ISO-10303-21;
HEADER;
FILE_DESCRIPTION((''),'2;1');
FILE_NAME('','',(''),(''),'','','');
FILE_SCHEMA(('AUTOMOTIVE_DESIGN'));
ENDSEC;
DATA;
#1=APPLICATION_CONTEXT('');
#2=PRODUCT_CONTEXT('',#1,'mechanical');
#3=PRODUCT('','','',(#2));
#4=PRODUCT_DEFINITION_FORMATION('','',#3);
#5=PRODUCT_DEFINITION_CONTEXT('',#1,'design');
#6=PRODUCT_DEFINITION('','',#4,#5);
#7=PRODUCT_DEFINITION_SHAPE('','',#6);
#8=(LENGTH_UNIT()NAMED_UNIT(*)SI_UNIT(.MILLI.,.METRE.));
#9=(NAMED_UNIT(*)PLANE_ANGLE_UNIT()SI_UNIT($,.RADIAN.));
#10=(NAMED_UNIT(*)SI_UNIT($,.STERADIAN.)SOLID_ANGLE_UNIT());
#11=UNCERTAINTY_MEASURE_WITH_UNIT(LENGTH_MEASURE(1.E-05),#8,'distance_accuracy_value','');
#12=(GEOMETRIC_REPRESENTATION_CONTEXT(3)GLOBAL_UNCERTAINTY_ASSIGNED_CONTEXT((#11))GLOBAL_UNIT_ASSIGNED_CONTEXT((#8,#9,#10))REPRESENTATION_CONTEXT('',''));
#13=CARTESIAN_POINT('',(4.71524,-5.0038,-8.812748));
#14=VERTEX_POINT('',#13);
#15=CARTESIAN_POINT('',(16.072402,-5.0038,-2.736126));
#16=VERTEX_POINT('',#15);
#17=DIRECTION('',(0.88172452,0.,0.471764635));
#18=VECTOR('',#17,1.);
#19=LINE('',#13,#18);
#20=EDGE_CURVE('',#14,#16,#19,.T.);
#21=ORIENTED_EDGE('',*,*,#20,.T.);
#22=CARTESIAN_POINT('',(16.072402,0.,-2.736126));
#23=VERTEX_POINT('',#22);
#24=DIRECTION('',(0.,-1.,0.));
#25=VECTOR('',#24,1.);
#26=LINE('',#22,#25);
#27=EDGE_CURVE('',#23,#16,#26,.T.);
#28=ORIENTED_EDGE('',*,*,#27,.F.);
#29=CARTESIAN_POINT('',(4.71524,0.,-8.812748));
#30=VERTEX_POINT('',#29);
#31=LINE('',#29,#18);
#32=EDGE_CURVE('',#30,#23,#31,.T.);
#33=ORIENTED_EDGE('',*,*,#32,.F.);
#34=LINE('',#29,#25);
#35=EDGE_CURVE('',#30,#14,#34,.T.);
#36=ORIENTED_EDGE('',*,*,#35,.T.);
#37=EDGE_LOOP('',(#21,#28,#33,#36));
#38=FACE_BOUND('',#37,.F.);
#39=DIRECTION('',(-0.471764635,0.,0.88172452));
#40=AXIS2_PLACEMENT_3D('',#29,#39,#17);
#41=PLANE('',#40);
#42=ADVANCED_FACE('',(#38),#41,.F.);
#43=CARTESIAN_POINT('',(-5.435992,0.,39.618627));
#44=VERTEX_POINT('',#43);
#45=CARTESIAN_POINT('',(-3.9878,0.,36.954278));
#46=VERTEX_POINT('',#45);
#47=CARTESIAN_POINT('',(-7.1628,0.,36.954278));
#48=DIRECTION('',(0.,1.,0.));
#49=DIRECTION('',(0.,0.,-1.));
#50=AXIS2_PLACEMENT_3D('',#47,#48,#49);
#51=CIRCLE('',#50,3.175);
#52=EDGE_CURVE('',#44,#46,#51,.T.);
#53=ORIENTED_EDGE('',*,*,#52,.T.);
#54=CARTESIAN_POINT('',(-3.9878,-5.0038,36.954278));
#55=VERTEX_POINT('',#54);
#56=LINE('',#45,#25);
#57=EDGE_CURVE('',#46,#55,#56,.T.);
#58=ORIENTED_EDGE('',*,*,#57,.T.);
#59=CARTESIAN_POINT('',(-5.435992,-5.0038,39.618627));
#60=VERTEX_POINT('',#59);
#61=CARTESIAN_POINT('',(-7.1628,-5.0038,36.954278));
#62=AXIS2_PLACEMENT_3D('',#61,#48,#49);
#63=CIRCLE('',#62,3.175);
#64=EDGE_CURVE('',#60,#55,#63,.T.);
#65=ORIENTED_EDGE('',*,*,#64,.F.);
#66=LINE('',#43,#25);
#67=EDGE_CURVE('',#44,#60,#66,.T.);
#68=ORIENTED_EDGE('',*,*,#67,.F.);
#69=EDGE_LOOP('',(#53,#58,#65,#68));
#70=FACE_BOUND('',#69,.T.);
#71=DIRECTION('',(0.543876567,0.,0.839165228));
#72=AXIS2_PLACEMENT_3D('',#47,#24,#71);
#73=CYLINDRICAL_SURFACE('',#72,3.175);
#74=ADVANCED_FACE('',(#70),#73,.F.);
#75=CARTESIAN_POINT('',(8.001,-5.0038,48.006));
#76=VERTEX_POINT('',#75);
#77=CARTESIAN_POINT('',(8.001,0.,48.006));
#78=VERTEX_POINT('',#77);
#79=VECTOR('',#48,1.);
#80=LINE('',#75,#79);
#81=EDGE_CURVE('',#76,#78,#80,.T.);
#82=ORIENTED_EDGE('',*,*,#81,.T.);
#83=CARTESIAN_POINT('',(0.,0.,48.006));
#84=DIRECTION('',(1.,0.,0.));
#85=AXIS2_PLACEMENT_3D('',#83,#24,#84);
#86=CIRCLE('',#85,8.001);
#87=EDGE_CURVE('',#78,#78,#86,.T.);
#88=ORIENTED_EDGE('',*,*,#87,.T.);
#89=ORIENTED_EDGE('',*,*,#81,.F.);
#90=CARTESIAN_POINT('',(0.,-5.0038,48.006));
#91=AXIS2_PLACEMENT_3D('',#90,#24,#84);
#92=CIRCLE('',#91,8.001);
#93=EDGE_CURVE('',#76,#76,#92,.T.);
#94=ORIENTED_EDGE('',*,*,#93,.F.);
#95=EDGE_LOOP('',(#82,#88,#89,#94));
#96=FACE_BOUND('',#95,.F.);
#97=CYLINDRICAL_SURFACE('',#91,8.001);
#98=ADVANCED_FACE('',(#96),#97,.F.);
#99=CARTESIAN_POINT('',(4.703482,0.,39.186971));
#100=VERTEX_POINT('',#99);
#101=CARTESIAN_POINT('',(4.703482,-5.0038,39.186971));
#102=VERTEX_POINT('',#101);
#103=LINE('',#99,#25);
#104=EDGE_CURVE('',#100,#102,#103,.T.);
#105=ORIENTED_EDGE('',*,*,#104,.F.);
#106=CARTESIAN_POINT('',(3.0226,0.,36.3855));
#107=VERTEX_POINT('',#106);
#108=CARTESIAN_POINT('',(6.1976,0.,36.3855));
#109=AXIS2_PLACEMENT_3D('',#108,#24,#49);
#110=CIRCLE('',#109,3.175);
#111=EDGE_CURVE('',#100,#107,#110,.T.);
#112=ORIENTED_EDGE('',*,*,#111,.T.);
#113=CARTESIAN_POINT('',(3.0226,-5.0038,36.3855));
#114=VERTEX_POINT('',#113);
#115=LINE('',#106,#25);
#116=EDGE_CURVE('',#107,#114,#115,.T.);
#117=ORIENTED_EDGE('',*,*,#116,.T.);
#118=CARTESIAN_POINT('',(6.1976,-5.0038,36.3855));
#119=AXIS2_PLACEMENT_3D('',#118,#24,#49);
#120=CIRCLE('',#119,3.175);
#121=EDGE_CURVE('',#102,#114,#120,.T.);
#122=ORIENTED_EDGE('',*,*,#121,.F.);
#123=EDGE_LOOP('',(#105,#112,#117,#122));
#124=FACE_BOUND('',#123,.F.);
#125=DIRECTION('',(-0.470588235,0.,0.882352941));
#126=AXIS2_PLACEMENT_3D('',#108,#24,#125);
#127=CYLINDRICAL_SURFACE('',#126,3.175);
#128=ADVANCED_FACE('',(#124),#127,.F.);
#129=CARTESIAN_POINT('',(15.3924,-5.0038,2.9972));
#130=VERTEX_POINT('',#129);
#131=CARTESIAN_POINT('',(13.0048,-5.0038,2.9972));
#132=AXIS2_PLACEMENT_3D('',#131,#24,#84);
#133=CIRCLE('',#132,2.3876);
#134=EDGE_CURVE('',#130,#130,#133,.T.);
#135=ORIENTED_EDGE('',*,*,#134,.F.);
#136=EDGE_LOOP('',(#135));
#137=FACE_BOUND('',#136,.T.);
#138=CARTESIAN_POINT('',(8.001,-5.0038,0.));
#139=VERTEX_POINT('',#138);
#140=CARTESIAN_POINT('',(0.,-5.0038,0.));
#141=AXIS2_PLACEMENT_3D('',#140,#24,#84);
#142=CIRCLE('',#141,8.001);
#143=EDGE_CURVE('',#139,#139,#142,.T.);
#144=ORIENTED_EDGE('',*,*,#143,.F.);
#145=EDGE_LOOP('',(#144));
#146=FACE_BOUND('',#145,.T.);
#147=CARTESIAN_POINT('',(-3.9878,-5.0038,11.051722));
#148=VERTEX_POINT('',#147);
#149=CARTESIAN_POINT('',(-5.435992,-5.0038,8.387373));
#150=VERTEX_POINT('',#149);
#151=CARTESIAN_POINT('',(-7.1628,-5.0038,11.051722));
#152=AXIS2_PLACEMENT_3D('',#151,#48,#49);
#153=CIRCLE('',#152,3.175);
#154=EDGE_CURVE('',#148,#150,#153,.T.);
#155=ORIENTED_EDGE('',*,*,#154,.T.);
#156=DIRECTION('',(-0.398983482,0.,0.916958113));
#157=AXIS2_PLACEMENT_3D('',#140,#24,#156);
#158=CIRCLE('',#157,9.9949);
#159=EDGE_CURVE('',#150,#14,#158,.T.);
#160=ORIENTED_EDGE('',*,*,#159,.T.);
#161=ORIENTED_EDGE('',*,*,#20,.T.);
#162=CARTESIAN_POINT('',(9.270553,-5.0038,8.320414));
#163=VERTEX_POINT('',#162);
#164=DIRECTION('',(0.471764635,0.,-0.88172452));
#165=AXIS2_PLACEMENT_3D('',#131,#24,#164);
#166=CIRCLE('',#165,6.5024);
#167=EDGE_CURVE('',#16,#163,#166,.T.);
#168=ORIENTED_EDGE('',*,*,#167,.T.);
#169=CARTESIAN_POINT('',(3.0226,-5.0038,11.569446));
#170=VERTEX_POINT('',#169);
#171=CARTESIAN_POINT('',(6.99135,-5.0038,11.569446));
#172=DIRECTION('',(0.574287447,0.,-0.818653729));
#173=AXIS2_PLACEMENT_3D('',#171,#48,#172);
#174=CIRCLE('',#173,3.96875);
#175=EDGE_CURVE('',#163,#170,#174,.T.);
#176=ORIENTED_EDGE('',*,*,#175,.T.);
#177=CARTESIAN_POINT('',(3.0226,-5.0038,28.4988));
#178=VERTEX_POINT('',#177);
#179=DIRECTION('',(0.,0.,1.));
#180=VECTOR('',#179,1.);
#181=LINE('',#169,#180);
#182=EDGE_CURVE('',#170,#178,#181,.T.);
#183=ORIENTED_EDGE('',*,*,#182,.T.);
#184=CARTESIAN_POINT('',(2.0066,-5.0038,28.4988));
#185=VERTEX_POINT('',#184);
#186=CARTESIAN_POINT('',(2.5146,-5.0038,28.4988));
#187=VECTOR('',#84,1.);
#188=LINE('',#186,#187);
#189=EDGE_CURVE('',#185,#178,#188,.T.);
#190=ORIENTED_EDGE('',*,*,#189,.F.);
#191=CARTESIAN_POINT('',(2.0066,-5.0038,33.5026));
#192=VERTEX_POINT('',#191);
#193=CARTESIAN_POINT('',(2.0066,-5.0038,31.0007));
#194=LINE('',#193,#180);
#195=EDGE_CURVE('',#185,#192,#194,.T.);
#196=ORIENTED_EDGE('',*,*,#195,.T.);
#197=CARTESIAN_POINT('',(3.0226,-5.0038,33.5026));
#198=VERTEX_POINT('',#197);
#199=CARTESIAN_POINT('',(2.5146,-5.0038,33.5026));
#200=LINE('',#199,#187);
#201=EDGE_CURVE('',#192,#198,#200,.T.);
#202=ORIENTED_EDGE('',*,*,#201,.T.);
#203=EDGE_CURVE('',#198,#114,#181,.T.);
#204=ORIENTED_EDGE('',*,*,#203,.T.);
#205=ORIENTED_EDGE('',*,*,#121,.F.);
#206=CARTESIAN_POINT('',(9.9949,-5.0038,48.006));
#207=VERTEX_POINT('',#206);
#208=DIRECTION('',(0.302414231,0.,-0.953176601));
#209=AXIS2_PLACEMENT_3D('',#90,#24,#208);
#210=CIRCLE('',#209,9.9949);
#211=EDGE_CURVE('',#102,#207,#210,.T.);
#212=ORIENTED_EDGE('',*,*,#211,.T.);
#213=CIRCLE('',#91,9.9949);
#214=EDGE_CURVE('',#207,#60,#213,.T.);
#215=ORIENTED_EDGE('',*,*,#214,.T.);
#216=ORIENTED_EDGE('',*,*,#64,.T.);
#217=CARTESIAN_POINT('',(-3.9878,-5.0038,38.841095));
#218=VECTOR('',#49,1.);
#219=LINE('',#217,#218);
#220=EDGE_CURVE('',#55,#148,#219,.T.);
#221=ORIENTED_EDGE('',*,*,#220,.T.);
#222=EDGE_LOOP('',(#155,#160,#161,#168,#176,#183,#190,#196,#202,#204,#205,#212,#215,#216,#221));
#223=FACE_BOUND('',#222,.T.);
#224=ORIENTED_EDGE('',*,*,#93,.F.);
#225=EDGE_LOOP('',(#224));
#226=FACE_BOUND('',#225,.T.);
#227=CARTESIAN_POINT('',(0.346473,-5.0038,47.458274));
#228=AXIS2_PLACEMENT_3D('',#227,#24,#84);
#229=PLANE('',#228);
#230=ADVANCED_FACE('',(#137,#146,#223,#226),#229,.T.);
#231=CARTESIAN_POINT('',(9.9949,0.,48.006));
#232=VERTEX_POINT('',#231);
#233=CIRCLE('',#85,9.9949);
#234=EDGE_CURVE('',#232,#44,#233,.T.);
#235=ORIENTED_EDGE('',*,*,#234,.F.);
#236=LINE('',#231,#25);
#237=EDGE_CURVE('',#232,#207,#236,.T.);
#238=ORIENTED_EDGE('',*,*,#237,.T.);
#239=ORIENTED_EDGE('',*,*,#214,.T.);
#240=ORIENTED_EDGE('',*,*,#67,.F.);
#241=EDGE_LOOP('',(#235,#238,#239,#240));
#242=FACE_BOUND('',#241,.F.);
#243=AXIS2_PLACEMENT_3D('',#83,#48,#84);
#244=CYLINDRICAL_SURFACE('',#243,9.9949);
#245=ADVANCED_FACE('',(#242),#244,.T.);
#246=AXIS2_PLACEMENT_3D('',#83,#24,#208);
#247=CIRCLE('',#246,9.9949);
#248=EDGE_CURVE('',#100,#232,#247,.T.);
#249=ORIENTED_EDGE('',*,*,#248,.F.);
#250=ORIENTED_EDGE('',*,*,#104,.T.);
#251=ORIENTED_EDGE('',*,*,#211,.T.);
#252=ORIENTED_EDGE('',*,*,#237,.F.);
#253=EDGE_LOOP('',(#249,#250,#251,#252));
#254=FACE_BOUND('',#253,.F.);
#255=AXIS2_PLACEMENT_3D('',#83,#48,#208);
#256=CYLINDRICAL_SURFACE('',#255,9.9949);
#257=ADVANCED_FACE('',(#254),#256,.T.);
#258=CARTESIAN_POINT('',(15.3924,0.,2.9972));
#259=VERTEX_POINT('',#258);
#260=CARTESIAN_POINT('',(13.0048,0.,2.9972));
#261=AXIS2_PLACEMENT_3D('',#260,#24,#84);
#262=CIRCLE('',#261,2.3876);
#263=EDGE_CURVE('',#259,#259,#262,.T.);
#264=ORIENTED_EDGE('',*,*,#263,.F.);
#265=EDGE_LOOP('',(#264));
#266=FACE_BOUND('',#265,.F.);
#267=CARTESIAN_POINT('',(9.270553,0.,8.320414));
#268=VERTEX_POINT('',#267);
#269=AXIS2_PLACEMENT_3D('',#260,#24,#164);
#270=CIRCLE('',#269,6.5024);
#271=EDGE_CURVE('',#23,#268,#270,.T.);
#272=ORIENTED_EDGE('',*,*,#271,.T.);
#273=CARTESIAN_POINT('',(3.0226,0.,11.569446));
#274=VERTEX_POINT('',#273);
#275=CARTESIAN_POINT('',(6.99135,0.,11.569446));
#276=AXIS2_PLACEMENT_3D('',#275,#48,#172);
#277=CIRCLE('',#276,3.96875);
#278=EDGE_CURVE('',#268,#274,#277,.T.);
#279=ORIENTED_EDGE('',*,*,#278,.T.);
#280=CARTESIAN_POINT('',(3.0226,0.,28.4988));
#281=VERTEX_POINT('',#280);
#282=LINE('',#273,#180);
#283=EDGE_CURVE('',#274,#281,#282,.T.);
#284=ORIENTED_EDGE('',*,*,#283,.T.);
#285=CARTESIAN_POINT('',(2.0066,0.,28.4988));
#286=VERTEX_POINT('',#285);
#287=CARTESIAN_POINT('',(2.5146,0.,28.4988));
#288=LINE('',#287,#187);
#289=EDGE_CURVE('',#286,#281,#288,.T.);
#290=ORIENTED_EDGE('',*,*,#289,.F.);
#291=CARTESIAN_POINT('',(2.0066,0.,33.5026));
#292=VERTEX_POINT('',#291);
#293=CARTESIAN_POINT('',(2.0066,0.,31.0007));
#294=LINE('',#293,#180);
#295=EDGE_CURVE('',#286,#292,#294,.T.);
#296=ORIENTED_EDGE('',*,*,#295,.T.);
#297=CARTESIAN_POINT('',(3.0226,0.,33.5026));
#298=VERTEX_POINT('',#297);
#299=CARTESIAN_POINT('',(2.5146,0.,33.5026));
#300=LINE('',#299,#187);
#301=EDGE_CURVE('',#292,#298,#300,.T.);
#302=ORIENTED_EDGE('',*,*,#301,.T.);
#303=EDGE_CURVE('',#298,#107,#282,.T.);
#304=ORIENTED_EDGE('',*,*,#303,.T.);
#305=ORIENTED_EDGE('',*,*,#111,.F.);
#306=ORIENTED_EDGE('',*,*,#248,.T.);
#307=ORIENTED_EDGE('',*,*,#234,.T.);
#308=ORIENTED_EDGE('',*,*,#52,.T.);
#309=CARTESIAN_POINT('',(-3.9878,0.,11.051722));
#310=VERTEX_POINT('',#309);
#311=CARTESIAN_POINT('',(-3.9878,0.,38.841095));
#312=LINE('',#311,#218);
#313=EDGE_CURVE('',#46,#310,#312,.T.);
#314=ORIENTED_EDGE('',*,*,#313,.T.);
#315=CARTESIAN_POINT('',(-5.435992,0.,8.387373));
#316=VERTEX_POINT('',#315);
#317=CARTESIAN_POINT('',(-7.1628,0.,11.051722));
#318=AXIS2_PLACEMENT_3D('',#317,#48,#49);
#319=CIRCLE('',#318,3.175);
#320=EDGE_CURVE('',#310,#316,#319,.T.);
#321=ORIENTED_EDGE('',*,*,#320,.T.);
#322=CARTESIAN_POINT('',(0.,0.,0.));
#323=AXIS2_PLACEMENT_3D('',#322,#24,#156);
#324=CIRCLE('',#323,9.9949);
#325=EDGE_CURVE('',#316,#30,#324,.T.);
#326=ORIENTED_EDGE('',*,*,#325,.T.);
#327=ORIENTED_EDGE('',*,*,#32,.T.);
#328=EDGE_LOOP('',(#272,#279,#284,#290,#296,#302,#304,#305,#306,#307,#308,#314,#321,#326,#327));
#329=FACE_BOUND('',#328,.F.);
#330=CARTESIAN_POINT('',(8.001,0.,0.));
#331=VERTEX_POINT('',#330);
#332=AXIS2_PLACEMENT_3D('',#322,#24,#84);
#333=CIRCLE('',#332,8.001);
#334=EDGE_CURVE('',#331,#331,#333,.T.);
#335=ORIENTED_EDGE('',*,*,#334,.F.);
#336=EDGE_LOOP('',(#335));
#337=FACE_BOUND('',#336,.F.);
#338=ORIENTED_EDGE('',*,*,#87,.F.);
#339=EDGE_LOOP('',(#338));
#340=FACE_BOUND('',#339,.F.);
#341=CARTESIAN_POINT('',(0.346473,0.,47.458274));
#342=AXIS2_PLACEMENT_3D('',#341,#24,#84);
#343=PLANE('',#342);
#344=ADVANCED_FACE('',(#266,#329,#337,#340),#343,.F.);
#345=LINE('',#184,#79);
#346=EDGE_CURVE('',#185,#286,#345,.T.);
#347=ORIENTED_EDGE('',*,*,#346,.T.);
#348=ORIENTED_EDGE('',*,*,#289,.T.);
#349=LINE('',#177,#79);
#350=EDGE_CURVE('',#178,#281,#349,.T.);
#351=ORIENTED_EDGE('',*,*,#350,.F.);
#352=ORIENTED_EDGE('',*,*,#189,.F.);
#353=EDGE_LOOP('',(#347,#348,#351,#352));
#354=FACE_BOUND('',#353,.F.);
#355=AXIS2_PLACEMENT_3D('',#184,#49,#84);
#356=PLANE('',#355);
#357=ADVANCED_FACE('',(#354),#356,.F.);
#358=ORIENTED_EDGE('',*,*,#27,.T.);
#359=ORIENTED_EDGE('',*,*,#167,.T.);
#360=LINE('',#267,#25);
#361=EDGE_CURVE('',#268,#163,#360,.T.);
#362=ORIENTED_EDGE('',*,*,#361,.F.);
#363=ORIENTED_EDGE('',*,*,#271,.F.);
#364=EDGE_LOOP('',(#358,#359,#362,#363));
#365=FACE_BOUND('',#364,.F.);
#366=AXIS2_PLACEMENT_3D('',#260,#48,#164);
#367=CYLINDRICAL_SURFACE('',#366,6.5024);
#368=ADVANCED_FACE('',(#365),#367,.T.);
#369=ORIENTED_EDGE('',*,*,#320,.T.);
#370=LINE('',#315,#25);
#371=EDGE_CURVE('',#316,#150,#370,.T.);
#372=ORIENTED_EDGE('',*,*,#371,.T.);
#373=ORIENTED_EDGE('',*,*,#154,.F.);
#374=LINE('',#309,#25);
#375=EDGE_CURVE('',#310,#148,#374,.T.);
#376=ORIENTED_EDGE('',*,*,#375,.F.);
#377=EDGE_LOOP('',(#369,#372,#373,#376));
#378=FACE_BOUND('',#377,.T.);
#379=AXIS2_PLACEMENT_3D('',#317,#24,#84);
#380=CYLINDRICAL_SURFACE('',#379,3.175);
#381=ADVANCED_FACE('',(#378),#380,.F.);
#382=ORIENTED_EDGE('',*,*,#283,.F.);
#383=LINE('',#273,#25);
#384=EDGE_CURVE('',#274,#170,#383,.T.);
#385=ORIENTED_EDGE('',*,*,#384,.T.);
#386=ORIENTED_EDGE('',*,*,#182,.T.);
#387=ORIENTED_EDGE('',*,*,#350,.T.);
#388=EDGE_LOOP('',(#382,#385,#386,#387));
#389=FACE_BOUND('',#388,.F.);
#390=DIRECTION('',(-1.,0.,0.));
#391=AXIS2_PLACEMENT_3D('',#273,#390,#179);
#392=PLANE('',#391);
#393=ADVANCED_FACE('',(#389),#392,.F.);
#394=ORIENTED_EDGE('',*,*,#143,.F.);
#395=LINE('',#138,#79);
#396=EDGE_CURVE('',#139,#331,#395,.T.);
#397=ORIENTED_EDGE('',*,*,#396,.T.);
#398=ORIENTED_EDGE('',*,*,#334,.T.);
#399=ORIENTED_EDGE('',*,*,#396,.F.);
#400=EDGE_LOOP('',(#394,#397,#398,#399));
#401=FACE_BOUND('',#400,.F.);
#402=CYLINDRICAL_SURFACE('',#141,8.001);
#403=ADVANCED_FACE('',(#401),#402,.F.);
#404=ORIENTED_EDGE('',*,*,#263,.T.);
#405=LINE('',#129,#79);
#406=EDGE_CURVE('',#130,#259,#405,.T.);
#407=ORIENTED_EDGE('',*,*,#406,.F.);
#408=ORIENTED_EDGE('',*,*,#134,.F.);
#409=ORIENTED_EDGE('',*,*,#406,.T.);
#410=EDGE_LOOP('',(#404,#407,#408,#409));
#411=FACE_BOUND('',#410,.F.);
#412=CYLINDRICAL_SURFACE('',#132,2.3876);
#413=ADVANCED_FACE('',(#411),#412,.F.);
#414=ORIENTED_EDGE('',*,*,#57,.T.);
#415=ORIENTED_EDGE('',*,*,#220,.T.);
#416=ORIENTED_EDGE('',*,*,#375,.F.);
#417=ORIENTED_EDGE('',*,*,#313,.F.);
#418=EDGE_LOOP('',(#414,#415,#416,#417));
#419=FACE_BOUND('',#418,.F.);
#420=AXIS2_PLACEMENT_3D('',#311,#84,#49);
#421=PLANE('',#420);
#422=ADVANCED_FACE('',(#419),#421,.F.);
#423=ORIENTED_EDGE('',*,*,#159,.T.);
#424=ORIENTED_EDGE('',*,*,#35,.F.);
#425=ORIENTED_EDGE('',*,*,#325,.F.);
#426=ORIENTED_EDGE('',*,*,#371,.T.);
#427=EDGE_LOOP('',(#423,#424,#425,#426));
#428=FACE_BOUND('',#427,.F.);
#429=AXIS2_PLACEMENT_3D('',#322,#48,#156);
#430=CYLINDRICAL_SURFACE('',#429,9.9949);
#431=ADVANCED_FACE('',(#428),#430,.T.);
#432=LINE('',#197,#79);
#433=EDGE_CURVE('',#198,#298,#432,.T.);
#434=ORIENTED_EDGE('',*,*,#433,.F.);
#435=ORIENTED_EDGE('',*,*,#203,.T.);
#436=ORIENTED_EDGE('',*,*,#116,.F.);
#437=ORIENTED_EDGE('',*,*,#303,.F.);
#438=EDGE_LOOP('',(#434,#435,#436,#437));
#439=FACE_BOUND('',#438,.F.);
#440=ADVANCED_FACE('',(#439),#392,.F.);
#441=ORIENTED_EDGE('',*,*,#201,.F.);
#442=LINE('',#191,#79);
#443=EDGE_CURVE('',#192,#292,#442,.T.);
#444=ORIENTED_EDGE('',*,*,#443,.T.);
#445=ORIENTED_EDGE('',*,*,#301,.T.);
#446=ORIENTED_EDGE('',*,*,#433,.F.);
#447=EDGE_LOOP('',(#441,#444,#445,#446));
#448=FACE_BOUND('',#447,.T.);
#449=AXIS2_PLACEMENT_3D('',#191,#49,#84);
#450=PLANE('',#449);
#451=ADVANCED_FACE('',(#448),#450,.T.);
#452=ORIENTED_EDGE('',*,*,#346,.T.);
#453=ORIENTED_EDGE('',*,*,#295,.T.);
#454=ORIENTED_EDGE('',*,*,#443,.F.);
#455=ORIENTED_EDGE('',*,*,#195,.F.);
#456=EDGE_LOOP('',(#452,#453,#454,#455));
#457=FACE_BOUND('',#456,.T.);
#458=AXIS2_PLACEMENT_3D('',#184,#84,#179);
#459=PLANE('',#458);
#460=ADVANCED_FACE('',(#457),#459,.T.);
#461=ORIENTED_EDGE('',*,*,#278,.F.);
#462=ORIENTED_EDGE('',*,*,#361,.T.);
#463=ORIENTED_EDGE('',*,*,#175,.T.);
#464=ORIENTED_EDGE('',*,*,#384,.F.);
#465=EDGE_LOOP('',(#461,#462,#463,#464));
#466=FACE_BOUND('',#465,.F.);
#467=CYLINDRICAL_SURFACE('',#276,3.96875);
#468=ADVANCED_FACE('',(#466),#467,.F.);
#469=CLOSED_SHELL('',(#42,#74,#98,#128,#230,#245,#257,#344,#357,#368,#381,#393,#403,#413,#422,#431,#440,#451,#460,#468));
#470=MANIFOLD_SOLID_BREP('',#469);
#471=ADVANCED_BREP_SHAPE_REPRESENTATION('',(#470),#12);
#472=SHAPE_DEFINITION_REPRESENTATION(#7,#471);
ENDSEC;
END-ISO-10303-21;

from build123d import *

# Parameters (mm, degrees)
F1_DEPTH = 5.0038
F2_R     = 3.175
F3_R     = 8.001
F4_DEPTH = 5.0038
F5_W     = 1.016
F5_H     = 5.0038
F6_DEPTH = 5.0038
F7_R     = 2.3876
F8_DEPTH = 5.0038


with BuildPart() as f1:
    # F0 (on Front) → F1 (new body)
    with BuildSketch(Plane.XZ):
        with BuildLine():
            ThreePointArc((9.9949, 48.006), (-5.4790676118, 56.3652968673), (-3.9878, 38.841095354))
            ThreePointArc((-3.9878, 38.841095354), (-0.5154258333, 38.0243988148), (3.0226, 38.4790951905))
            ThreePointArc((3.0226, 38.4790951905), (8.0656249215, 42.1031430108), (9.9949, 48.006))
        make_face()
        with BuildLine():
            Line((-3.9878, 38.841095354), (-3.9878, 9.164904646))
            ThreePointArc((-3.9878, 9.164904646), (-8.9961822265, -4.3550810966), (4.7152403545, -8.8127484027))
            Line((4.7152403545, -8.8127484027), (16.0724023653, -2.7361255174))
            ThreePointArc((16.0724023653, -2.7361255174), (18.5431093303, 6.4043007502), (9.270553305, 8.3204140086))
            ThreePointArc((9.270553305, 8.3204140086), (5.1603136206, 8.0483265237), (3.0226, 11.5694459962))
            Line((3.0226, 11.5694459962), (3.0226, 38.4790951905))
            ThreePointArc((3.0226, 38.4790951905), (-0.5154258333, 38.0243988148), (-3.9878, 38.841095354))
        make_face()
    extrude(amount=F1_DEPTH)

    # F2
    f2_edges = [f1.edges().sort_by_distance(p)[0] for p in [
        (-3.9878, -2.5019, 38.841095),
        (3.0226, -2.5019, 38.479095),
        (-3.9878, -2.5019, 9.164905),
    ]]
    fillet(f2_edges, radius=F2_R)

    # F3 (on face) → F4 (cut)
    with BuildSketch(Plane.XZ.offset(5.0038)):
        with Locations((0, 48.006)):
            Circle(F3_R)
        Circle(F3_R)
    extrude(amount=-F4_DEPTH, mode=Mode.SUBTRACT)

    # F5 (on face) → F6 (cut)
    with BuildSketch(Plane.XZ.offset(5.0038)):
        with Locations((2.5146, 31.0007)):
            Rectangle(F5_W, F5_H)
    extrude(amount=-F6_DEPTH, mode=Mode.SUBTRACT)

    # F7 (on face) → F8 (cut)
    with BuildSketch(Plane.XZ.offset(5.0038)):
        with Locations((13.0048, 2.9972)):
            Circle(F7_R)
    extrude(amount=-F8_DEPTH, mode=Mode.SUBTRACT)


solid = f1.part
